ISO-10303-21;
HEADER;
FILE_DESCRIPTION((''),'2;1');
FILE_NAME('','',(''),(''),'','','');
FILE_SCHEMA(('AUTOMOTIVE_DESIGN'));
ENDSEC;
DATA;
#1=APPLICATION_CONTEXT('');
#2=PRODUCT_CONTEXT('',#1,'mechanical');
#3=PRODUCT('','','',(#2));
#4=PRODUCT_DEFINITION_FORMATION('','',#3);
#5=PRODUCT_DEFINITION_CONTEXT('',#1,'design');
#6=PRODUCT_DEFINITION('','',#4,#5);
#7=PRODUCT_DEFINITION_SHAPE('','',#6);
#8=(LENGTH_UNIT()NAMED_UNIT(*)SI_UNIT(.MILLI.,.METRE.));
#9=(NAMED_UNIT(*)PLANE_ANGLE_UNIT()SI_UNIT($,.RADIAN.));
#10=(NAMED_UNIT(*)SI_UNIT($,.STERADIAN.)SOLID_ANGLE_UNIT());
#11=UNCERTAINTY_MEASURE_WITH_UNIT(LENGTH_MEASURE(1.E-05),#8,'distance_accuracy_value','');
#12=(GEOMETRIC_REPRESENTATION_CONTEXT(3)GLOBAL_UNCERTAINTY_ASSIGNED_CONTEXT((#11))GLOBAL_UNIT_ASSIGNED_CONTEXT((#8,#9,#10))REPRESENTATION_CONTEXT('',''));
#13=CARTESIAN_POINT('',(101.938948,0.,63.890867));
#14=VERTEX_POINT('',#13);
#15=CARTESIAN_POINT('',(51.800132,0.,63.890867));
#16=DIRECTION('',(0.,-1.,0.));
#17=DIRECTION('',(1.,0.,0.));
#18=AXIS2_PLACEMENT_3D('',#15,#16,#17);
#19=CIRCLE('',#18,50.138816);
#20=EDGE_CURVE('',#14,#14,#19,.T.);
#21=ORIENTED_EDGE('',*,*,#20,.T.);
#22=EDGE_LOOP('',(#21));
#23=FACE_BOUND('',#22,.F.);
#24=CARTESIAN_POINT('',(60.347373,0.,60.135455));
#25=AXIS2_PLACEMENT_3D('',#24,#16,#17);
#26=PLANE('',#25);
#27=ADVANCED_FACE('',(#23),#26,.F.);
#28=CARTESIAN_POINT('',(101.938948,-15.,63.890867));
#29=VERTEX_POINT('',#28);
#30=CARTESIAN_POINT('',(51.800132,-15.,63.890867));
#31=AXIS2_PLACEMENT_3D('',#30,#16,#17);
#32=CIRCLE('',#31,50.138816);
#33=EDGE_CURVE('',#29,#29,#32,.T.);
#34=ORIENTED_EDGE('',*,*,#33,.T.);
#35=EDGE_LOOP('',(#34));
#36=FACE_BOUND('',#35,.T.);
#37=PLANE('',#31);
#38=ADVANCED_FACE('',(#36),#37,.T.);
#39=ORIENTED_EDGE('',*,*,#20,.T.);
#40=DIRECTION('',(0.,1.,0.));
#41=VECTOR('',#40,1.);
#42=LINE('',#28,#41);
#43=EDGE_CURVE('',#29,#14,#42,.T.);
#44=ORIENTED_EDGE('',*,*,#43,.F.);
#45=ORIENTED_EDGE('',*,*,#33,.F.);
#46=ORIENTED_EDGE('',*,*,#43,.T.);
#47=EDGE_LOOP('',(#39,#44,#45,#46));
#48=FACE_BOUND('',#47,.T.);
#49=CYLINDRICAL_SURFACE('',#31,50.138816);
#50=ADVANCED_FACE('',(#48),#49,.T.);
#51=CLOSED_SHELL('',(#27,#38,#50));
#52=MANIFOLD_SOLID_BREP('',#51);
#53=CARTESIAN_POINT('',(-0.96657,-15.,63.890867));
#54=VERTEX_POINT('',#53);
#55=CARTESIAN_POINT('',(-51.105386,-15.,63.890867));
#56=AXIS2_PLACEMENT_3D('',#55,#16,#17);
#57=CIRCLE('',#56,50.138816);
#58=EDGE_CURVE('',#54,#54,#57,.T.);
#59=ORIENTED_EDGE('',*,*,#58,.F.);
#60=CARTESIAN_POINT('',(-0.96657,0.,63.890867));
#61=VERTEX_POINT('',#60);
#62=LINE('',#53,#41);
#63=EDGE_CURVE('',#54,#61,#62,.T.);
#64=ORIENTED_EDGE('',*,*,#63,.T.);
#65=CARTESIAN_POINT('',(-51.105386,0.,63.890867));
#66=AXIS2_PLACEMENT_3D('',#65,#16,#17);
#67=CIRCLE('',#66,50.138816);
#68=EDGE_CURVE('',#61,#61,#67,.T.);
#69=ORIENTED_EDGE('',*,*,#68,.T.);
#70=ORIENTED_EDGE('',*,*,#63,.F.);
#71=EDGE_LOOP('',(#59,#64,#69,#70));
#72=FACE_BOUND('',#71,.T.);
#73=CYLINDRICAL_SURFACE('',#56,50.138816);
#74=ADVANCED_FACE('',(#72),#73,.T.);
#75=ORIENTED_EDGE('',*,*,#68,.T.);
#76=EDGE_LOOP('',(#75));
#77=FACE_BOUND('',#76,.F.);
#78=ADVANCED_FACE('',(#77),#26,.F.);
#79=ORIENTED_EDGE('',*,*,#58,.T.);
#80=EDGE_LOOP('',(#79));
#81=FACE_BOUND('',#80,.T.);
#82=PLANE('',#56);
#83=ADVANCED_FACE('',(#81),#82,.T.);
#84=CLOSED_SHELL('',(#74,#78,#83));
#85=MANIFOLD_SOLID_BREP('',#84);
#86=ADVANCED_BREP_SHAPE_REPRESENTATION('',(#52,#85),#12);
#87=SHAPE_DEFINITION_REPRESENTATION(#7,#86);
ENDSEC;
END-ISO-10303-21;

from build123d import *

# Parameters (mm, degrees)
F7_W      = 120
F7_H      = 120
F8_DEPTH  = 15
F9_R      = 50.1388157633
F10_DEPTH = 25


# Not quite as in the source:
# - the program builds the solid bodies; features that only make, move or delete a surface that nothing else refers to are left out


with BuildPart() as f8:
    # F7 (on Front) → F8 (new body)
    with BuildSketch(Plane.XZ):
        with Locations((60.347372832, 60.1354547356)):
            Rectangle(F7_W, F7_H)
        with Locations((-59.652627168, 60.1354547356)):
            Rectangle(F7_W, F7_H)
    extrude(amount=F8_DEPTH)

    # F9 (on face) → F10 (intersect)
    with BuildSketch(Plane.XZ.offset(15)):
        with Locations((51.8001317978, 63.8908669353)):
            Circle(F9_R)
        with Locations((-51.1053861337, 63.8908669353)):
            Circle(F9_R)
    extrude(amount=-F10_DEPTH, mode=Mode.INTERSECT)


solid = f8.part
